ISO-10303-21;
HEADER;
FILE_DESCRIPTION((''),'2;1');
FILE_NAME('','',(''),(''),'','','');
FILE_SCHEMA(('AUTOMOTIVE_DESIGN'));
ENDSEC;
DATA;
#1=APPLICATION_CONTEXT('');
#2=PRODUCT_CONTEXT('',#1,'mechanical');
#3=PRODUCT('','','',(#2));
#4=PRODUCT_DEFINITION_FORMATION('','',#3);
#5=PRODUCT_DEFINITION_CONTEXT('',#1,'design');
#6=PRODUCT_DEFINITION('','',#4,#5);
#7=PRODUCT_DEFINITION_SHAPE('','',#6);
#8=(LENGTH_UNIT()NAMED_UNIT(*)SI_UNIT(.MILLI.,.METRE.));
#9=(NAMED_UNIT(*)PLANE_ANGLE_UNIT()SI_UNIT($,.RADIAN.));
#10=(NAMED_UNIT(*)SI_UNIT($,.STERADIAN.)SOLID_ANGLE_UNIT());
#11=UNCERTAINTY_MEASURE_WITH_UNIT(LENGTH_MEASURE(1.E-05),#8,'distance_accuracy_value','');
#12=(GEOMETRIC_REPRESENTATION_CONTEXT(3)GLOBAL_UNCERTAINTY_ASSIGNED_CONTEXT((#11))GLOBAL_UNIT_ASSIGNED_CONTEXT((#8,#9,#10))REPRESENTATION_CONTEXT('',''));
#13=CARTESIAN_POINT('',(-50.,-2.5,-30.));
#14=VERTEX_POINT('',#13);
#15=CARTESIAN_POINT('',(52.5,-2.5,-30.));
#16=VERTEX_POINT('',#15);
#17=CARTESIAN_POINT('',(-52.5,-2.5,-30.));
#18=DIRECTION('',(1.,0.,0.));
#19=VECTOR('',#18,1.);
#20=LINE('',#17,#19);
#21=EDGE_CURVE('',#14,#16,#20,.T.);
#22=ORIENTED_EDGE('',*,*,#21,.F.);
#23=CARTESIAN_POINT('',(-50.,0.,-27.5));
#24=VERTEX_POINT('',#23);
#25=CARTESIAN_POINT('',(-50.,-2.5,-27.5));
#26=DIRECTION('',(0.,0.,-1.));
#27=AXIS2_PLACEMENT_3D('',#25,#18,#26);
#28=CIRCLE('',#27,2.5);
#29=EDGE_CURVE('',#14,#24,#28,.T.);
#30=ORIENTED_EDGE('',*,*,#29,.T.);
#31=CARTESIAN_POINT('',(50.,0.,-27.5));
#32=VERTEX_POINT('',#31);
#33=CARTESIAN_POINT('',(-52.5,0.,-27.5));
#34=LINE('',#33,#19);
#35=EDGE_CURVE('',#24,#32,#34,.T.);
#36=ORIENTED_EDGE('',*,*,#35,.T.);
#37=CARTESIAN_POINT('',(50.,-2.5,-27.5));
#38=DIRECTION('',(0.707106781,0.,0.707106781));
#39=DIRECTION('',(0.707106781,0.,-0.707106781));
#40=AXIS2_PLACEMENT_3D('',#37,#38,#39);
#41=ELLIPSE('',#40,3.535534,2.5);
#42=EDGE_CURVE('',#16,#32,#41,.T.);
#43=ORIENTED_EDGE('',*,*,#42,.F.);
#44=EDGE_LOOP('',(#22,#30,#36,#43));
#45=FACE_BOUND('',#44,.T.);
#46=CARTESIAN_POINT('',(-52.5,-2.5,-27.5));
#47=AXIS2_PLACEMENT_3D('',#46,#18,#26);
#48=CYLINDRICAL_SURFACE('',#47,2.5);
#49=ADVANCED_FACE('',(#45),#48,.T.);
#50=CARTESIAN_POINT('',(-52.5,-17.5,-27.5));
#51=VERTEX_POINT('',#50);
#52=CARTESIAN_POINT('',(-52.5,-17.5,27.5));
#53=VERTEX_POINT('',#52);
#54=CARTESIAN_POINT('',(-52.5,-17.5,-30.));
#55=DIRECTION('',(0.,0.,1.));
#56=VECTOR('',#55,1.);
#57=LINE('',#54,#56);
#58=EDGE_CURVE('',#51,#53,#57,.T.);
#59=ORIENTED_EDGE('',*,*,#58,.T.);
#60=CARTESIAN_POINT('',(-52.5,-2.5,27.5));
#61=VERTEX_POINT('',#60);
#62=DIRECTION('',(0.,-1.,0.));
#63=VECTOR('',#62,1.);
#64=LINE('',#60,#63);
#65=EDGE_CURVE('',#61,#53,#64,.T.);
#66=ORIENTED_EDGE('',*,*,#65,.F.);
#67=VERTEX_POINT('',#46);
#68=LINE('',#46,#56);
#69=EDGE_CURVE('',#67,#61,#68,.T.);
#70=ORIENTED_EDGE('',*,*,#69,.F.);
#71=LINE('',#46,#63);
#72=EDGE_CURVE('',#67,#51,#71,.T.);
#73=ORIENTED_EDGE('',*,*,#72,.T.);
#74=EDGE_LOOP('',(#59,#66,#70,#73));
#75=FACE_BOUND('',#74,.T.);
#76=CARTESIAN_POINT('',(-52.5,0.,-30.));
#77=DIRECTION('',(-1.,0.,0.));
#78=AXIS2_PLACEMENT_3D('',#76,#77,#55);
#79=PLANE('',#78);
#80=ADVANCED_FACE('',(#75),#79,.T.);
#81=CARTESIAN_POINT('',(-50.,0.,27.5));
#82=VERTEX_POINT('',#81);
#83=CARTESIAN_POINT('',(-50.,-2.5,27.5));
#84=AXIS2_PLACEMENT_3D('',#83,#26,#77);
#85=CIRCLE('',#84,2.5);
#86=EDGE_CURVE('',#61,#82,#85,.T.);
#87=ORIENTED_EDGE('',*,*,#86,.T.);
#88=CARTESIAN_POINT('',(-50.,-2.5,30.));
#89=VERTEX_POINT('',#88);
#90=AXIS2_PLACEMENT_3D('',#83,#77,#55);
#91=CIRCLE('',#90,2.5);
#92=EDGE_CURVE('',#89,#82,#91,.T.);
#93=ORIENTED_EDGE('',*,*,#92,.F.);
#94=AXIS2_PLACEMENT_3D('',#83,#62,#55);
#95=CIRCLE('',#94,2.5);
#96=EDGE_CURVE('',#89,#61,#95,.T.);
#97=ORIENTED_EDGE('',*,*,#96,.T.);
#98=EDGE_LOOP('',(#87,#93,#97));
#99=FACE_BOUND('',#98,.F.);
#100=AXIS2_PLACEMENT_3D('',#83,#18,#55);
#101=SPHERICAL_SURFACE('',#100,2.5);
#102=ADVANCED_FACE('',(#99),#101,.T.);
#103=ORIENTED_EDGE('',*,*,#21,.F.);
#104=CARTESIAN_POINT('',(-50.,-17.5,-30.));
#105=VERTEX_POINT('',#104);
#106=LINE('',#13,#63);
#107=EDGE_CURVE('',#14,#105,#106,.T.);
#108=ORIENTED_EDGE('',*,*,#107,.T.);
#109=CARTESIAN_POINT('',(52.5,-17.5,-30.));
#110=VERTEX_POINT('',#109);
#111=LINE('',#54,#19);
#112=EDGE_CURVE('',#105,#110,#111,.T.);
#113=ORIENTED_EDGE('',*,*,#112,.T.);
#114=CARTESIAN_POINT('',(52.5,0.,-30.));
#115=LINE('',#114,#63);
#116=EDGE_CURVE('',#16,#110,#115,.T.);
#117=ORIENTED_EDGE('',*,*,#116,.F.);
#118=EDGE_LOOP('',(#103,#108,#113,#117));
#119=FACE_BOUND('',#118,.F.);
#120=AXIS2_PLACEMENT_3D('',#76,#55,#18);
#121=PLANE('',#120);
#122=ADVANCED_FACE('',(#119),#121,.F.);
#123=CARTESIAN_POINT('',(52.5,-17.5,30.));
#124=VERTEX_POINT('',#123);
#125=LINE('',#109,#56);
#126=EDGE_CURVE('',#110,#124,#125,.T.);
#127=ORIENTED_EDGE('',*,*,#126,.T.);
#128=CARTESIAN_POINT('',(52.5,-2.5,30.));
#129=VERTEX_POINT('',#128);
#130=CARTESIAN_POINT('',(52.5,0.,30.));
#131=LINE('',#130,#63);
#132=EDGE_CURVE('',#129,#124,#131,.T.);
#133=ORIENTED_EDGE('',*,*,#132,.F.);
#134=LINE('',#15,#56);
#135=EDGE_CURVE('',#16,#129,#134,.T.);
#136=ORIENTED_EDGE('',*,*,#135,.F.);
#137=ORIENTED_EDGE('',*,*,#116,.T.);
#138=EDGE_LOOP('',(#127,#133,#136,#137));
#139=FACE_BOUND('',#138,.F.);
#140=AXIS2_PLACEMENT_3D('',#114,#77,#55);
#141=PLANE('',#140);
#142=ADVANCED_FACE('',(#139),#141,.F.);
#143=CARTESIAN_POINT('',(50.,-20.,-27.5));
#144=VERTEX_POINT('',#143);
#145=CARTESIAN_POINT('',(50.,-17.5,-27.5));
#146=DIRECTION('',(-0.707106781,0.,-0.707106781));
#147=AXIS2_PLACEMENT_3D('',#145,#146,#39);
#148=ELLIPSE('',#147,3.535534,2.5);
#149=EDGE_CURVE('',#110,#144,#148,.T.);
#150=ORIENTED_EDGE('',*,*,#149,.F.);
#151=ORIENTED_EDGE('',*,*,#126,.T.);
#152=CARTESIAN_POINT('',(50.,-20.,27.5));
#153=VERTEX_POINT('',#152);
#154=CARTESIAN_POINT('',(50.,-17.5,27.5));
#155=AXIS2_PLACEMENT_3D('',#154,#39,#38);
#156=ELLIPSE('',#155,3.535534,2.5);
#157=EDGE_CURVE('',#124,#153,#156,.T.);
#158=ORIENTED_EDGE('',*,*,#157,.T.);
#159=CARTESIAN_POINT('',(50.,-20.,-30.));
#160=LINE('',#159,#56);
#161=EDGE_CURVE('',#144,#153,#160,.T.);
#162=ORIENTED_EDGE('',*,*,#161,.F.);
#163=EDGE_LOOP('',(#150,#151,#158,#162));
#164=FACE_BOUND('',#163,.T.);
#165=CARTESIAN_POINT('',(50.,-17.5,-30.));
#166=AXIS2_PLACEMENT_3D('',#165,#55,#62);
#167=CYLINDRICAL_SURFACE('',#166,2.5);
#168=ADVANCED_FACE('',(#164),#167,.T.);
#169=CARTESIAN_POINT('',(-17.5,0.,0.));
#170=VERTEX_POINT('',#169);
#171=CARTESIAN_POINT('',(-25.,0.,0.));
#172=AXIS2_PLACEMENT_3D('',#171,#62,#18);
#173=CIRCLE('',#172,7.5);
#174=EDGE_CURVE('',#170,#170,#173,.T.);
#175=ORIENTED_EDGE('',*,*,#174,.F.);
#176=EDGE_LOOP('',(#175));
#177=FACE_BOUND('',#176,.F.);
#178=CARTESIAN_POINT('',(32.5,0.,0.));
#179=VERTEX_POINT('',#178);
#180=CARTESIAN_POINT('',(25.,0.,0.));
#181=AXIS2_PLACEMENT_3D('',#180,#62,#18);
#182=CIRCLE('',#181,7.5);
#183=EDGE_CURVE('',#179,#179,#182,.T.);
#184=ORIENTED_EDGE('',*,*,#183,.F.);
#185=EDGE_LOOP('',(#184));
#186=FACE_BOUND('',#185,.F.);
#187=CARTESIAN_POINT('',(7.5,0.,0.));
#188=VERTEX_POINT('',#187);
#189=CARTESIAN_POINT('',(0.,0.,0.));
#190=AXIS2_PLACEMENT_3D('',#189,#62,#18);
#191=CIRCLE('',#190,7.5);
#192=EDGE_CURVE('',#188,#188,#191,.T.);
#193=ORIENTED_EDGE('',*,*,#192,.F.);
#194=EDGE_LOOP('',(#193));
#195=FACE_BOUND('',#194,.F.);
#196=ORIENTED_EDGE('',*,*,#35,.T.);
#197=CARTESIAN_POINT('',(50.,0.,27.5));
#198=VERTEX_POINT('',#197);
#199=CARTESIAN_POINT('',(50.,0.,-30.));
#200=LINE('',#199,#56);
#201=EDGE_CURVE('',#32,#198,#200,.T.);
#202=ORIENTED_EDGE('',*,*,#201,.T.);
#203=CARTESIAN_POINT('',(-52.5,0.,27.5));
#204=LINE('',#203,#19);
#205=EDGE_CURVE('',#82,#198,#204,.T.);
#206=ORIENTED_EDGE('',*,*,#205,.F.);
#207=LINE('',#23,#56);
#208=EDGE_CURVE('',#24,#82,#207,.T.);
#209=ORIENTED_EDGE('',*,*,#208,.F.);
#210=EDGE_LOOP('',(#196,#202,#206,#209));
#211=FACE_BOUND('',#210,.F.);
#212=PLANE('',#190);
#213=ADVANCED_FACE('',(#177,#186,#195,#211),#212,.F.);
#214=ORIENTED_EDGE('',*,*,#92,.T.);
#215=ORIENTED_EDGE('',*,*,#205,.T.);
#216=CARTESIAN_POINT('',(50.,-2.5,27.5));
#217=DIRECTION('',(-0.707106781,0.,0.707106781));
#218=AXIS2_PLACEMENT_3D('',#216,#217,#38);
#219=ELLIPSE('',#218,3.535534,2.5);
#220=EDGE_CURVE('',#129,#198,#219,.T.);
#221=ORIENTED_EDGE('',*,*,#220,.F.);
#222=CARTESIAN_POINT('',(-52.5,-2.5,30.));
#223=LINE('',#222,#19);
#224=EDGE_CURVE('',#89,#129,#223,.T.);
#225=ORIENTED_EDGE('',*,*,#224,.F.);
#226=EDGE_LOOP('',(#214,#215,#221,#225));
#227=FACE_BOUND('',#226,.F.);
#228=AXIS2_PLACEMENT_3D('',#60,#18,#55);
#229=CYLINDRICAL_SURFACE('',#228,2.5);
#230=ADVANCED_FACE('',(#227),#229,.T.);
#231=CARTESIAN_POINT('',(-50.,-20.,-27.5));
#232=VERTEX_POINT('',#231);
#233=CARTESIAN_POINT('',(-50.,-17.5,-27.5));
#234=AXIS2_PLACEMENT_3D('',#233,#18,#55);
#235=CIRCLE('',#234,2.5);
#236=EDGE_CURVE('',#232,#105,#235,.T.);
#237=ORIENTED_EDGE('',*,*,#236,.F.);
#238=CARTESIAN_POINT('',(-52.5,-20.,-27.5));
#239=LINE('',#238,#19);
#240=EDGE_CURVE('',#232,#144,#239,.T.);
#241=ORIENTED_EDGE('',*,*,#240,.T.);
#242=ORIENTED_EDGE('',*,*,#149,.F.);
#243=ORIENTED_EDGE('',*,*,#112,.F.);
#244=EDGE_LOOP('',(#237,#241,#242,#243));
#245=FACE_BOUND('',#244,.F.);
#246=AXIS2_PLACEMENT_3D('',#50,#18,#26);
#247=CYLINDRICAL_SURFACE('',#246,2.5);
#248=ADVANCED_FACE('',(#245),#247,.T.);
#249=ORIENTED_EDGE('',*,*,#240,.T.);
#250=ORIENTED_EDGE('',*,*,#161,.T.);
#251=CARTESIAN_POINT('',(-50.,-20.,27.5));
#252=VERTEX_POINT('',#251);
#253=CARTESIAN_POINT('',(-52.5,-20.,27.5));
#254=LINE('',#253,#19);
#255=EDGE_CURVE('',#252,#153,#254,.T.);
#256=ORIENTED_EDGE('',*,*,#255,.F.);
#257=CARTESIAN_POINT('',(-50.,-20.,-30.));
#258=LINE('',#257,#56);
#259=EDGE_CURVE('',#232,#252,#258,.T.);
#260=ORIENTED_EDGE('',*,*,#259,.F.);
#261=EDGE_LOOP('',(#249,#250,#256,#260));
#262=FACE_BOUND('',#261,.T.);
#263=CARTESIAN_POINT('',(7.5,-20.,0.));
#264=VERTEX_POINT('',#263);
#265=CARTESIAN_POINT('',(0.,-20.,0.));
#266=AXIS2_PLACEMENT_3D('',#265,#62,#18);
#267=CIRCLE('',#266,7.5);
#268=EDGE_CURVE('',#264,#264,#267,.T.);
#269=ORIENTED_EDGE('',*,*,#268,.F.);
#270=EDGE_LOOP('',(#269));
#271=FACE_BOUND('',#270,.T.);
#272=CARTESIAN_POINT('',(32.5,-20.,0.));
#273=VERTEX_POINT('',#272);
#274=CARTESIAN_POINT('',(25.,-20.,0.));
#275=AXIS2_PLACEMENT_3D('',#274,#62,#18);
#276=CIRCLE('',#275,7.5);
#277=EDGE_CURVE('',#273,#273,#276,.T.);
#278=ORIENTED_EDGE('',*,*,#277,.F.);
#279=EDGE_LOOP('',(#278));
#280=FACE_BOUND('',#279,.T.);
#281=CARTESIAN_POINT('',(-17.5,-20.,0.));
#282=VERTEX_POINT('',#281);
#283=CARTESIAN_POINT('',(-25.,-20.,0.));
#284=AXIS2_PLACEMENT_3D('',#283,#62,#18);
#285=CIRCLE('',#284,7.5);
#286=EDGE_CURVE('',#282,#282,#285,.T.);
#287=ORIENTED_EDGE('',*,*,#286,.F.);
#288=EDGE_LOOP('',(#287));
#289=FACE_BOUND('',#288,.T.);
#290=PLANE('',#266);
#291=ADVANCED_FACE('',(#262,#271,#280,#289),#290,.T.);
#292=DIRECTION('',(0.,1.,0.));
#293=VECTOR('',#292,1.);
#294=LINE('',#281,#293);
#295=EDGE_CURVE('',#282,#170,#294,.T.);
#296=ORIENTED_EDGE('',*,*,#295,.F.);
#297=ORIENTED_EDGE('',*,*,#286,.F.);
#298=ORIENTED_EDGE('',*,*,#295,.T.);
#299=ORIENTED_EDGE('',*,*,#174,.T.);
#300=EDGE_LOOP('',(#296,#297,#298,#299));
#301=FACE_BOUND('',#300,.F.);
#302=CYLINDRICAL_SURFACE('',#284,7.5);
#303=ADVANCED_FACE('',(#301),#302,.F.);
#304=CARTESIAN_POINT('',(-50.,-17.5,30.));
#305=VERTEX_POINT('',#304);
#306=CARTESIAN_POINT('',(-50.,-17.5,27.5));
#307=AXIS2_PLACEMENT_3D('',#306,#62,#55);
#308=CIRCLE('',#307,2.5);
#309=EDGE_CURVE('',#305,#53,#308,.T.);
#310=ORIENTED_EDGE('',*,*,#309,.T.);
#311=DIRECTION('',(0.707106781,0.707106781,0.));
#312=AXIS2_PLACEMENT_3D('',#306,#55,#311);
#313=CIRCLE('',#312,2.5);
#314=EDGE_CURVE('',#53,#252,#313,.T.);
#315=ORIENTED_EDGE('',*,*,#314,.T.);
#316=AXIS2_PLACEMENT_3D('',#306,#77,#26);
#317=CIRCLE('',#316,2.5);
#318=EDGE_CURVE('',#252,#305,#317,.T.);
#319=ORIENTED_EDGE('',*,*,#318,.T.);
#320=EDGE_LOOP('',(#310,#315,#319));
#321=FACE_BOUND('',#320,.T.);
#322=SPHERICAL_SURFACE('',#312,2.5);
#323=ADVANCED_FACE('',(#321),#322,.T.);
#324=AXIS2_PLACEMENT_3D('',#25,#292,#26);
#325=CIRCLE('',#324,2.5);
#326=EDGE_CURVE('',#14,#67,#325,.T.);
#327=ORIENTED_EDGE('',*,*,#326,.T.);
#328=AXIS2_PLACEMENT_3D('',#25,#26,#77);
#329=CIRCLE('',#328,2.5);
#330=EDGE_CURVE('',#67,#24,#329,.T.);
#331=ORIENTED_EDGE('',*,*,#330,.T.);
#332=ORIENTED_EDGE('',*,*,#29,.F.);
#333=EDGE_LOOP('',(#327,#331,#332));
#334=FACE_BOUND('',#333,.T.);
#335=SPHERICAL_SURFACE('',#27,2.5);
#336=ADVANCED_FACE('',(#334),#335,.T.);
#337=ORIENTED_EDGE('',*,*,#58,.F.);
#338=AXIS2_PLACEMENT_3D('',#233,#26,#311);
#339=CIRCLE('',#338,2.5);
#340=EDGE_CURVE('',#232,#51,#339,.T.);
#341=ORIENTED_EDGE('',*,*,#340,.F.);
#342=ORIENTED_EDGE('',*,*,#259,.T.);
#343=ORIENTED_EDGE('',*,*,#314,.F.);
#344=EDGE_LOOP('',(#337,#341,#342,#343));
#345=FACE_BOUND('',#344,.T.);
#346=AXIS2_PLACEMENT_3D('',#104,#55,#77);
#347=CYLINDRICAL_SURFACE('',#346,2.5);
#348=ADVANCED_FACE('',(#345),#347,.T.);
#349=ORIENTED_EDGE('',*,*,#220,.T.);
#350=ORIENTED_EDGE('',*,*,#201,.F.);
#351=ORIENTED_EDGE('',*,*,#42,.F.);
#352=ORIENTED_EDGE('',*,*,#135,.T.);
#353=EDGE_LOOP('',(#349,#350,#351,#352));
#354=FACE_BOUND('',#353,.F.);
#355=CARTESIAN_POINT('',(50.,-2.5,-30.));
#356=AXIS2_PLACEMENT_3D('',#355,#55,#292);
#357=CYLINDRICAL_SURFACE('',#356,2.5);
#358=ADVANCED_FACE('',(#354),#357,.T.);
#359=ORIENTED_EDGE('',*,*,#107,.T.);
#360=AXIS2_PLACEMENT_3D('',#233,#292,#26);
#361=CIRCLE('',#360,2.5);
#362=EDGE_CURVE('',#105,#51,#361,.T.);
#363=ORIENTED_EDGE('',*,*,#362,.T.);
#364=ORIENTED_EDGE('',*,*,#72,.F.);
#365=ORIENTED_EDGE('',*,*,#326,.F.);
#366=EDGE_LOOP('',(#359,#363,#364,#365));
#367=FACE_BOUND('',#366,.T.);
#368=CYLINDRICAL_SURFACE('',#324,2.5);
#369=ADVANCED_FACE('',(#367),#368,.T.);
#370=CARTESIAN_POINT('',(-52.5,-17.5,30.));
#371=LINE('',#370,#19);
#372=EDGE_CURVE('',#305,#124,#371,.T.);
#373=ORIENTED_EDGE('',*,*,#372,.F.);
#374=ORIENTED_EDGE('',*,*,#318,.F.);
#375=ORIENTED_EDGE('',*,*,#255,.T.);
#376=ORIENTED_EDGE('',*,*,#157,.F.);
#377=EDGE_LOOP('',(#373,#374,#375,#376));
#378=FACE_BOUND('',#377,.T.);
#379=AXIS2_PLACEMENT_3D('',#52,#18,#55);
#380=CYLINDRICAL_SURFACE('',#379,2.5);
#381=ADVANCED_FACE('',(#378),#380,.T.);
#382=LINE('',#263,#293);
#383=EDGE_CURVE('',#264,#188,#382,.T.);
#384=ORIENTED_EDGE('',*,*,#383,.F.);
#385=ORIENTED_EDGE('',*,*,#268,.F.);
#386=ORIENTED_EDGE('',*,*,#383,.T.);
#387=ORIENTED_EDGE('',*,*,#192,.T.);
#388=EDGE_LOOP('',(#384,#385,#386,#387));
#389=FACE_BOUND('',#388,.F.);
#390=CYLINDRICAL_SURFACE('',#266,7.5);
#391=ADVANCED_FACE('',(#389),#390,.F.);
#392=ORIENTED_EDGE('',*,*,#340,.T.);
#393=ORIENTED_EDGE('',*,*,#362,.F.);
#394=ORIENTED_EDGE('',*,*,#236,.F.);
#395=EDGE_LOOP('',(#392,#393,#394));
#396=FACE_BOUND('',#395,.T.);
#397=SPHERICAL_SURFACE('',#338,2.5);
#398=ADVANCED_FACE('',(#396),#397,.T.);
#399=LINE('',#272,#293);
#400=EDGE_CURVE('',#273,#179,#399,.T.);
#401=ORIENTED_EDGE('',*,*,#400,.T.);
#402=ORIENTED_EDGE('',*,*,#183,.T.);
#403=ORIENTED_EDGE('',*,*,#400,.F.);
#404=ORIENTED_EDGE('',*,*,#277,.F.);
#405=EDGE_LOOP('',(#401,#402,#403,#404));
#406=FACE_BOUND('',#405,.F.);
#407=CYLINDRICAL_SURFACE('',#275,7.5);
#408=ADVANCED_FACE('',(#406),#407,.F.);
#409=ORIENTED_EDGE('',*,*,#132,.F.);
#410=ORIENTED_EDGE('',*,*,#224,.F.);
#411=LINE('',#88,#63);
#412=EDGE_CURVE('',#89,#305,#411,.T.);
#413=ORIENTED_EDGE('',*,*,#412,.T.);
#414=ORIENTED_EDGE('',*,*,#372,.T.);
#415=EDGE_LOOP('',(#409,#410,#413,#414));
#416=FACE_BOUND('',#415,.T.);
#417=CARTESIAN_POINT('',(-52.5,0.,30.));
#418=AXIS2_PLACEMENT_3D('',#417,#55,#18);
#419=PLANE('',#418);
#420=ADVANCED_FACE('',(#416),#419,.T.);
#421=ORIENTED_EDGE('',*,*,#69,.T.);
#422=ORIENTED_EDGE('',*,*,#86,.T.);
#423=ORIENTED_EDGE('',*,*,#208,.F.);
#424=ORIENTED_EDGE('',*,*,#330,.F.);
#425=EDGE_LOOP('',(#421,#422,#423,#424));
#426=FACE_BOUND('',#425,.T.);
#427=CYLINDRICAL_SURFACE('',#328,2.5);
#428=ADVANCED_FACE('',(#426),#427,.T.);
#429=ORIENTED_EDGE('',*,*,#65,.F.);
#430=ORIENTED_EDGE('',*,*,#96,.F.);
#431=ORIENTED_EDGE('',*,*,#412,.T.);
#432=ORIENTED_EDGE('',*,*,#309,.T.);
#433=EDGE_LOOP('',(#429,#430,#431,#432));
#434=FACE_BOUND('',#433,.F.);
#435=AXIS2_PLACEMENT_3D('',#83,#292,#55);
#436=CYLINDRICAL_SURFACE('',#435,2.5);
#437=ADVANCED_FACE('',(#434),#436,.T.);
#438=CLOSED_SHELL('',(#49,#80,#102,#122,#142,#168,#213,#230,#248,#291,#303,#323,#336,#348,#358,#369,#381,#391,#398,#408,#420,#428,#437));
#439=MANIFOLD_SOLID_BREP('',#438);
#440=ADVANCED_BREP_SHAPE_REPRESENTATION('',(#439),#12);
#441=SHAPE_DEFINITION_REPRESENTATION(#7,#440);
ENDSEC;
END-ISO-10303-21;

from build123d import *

# Parameters (mm, degrees)
F0_W         = 105
F0_H         = 60
F1_DEPTH     = 20
F2_R         = 7.5
F3_DEPTH     = 25
F4_R         = 2.5
F5_T1_DEPTH  = 55
F5_T3_DEPTH  = 15
F5_S7_W      = 2.5
F5_S7_H      = 2.5
F5_T8_DEPTH  = 2.5
F5_S13_W     = 2.5
F5_S13_H     = 2.5
F5_T14_DEPTH = 2.5
F5_T18_ANGLE = 90
F5_T20_ANGLE = 90


# Not quite as in the source:
# - a fillet or chamfer that OpenCascade refuses, or shapes differently, is made with other operations: its cross-section is extruded or revolved along the edge and cut away or added


with BuildPart() as f1:
    # F0 (on Front) → F1 (new body)
    with BuildSketch(Plane.XZ):
        Rectangle(F0_W, F0_H)
    extrude(amount=F1_DEPTH)

    # F2 (on face) → F3 (cut)
    with BuildSketch(Plane.XZ.offset(20)):
        with Locations((-25, 0)):
            Circle(F2_R)
        Circle(F2_R)
        with Locations((25, 0)):
            Circle(F2_R)
    extrude(amount=-F3_DEPTH, mode=Mode.SUBTRACT)

    # F4
    f4_edges = [f1.edges().sort_by_distance(p)[0] for p in [
        (0, -20, 30),
        (-52.5, -20, 0),
        (0, -20, -30),
        (52.5, -20, 0),
        (0, 0, -30),
        (0, 0, 30),
        (52.5, 0, 0),
    ]]
    fillet(f4_edges, radius=F4_R)

    # F5: fillet of radius 2.5 on 1 edges, made by hand

    # F5_s2 → F5_t1 (cut)
    with BuildSketch(Plane.XY.offset(-27.5)):
        with BuildLine():
            ThreePointArc((-52.5, -2.5), (-51.767766953, -0.732233047), (-50, 0))
            Line((-50, 0), (-52.5, 0))
            Line((-52.5, 0), (-52.5, -2.5))
        make_face()
    extrude(amount=F5_T1_DEPTH, mode=Mode.SUBTRACT)

    # F5_s4 → F5_t3 (cut)
    with BuildSketch(Plane.XZ.offset(2.5)):
        with BuildLine():
            ThreePointArc((-50, -30), (-51.767766953, -29.267766953), (-52.5, -27.5))
            Line((-52.5, -27.5), (-52.5, -30))
            Line((-52.5, -30), (-50, -30))
        make_face()
        with BuildLine():
            ThreePointArc((-50, 30), (-51.767766953, 29.267766953), (-52.5, 27.5))
            Line((-52.5, 27.5), (-52.5, 30))
            Line((-52.5, 30), (-50, 30))
        make_face()
    extrude(amount=F5_T3_DEPTH, mode=Mode.SUBTRACT)


with BuildPart() as f5_tool6:
    # F5_s7 → F5_t8 (new body)
    with BuildSketch(Plane.XY.offset(-27.5)):
        with Locations((-51.25, -18.75)):
            Rectangle(F5_S7_W, F5_S7_H)
    extrude(amount=-F5_T8_DEPTH)

    # F5_s9 → F5_t10 (revolve, cut)
    with BuildSketch(Plane(origin=(-50, -17.5, -27.5), x_dir=(0.7071067812, 0.7071067812, 0), z_dir=(-0.7071067812, 0.7071067812, 0))):
        with BuildLine():
            ThreePointArc((0, -2.5), (2.5, 0), (0, 2.5))
            Line((0, 2.5), (0, -2.5))
        make_face()
    revolve(axis=Axis((-50, -17.5, -27.5), (0, 0, -1)), mode=Mode.SUBTRACT)


with BuildPart() as f1_1:
    add(f1.part)

    # F5_t5: cut F5_tool6
    add(f5_tool6.part, mode=Mode.SUBTRACT)


with BuildPart() as f5_tool12:
    # F5_s13 → F5_t14 (new body)
    with BuildSketch(Plane.XY.offset(27.5)):
        with Locations((-51.25, -18.75)):
            Rectangle(F5_S13_W, F5_S13_H)
    extrude(amount=F5_T14_DEPTH)

    # F5_s15 → F5_t16 (revolve, cut)
    with BuildSketch(Plane(origin=(-50, -17.5, 27.5), x_dir=(0.7071067812, 0.7071067812, 0), z_dir=(0.7071067812, -0.7071067812, 0))):
        with BuildLine():
            ThreePointArc((0, -2.5), (2.5, 0), (0, 2.5))
            Line((0, 2.5), (0, -2.5))
        make_face()
    revolve(axis=Axis((-50, -17.5, 27.5), (0, 0, 1)), mode=Mode.SUBTRACT)


with BuildPart() as f1_2:
    add(f1_1.part)

    # F5_t11: cut F5_tool12
    add(f5_tool12.part, mode=Mode.SUBTRACT)

    # F5_s17 → F5_t18 (revolve, cut)
    with BuildSketch(Plane.XZ.offset(2.5)):
        with BuildLine():
            ThreePointArc((-52.5, 27.5), (-51.767766953, 29.267766953), (-50, 30))
            Line((-50, 30), (-52.5, 30))
            Line((-52.5, 30), (-52.5, 27.5))
        make_face()
    revolve(axis=Axis((-52.5, -2.5, 27.5), (-1, 0, 0)), revolution_arc=F5_T18_ANGLE, mode=Mode.SUBTRACT)

    # F5_s19 → F5_t20 (revolve, cut)
    with BuildSketch(Plane.XZ.offset(2.5)):
        with BuildLine():
            ThreePointArc((-52.5, -27.5), (-51.767766953, -29.267766953), (-50, -30))
            Line((-50, -30), (-52.5, -30))
            Line((-52.5, -30), (-52.5, -27.5))
        make_face()
    revolve(axis=Axis((-52.5, -2.5, -27.5), (1, 0, 0)), revolution_arc=F5_T20_ANGLE, mode=Mode.SUBTRACT)


solid = f1_2.part
